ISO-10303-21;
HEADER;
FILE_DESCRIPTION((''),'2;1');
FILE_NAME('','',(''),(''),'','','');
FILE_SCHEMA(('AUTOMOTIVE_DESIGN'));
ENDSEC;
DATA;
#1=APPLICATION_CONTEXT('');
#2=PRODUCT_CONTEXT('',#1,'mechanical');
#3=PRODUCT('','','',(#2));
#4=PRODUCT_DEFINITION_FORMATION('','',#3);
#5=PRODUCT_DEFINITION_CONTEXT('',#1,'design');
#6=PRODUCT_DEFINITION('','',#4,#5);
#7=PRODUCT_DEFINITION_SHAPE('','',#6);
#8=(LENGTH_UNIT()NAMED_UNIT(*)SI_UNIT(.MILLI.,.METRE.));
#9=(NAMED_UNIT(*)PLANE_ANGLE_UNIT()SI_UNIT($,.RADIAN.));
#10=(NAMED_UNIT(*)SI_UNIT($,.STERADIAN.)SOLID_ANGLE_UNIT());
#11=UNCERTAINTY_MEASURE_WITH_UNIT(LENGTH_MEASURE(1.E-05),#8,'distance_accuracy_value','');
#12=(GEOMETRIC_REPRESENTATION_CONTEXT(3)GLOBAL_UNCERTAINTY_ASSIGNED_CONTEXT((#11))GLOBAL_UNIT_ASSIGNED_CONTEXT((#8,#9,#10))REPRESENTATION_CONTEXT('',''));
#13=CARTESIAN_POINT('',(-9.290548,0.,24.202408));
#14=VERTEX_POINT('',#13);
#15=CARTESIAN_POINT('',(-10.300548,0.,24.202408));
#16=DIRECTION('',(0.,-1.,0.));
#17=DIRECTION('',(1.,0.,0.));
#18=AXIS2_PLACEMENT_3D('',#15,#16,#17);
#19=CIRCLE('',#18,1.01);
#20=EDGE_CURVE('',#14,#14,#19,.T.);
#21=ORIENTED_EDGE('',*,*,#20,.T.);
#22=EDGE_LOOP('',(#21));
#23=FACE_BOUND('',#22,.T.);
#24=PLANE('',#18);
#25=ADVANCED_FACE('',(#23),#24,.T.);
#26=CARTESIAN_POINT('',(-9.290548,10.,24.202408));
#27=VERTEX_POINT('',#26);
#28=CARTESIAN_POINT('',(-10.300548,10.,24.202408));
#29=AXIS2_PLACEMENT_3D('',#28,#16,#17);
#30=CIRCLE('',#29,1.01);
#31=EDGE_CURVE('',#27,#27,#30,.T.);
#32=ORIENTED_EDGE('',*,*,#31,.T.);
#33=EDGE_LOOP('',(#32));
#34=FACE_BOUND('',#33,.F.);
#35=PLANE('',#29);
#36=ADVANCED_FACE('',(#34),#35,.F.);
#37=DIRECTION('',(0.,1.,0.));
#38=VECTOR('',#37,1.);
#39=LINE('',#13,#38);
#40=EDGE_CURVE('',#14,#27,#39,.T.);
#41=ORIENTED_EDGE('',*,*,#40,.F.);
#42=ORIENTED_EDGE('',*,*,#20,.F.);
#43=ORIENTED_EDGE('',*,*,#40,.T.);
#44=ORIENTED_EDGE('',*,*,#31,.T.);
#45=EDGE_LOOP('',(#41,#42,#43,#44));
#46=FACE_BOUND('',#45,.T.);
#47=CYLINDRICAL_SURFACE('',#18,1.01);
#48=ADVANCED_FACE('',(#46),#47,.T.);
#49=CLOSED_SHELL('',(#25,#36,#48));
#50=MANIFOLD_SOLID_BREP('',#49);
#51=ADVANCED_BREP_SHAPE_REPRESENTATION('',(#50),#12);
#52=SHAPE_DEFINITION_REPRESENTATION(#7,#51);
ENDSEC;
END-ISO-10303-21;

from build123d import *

# Parameters (mm, degrees)
F0_R     = 1.01
F1_DEPTH = 10


# Not quite as in the source:
# - the program builds the solid bodies; features that only make, move or delete a surface that nothing else refers to are left out


with BuildPart() as f1:
    # F0 (on Front) → F1 (new body)
    with BuildSketch(Plane.XZ):
        with Locations((-10.3005478159, 24.202408269)):
            Circle(F0_R)
    extrude(amount=-F1_DEPTH)


solid = f1.part
